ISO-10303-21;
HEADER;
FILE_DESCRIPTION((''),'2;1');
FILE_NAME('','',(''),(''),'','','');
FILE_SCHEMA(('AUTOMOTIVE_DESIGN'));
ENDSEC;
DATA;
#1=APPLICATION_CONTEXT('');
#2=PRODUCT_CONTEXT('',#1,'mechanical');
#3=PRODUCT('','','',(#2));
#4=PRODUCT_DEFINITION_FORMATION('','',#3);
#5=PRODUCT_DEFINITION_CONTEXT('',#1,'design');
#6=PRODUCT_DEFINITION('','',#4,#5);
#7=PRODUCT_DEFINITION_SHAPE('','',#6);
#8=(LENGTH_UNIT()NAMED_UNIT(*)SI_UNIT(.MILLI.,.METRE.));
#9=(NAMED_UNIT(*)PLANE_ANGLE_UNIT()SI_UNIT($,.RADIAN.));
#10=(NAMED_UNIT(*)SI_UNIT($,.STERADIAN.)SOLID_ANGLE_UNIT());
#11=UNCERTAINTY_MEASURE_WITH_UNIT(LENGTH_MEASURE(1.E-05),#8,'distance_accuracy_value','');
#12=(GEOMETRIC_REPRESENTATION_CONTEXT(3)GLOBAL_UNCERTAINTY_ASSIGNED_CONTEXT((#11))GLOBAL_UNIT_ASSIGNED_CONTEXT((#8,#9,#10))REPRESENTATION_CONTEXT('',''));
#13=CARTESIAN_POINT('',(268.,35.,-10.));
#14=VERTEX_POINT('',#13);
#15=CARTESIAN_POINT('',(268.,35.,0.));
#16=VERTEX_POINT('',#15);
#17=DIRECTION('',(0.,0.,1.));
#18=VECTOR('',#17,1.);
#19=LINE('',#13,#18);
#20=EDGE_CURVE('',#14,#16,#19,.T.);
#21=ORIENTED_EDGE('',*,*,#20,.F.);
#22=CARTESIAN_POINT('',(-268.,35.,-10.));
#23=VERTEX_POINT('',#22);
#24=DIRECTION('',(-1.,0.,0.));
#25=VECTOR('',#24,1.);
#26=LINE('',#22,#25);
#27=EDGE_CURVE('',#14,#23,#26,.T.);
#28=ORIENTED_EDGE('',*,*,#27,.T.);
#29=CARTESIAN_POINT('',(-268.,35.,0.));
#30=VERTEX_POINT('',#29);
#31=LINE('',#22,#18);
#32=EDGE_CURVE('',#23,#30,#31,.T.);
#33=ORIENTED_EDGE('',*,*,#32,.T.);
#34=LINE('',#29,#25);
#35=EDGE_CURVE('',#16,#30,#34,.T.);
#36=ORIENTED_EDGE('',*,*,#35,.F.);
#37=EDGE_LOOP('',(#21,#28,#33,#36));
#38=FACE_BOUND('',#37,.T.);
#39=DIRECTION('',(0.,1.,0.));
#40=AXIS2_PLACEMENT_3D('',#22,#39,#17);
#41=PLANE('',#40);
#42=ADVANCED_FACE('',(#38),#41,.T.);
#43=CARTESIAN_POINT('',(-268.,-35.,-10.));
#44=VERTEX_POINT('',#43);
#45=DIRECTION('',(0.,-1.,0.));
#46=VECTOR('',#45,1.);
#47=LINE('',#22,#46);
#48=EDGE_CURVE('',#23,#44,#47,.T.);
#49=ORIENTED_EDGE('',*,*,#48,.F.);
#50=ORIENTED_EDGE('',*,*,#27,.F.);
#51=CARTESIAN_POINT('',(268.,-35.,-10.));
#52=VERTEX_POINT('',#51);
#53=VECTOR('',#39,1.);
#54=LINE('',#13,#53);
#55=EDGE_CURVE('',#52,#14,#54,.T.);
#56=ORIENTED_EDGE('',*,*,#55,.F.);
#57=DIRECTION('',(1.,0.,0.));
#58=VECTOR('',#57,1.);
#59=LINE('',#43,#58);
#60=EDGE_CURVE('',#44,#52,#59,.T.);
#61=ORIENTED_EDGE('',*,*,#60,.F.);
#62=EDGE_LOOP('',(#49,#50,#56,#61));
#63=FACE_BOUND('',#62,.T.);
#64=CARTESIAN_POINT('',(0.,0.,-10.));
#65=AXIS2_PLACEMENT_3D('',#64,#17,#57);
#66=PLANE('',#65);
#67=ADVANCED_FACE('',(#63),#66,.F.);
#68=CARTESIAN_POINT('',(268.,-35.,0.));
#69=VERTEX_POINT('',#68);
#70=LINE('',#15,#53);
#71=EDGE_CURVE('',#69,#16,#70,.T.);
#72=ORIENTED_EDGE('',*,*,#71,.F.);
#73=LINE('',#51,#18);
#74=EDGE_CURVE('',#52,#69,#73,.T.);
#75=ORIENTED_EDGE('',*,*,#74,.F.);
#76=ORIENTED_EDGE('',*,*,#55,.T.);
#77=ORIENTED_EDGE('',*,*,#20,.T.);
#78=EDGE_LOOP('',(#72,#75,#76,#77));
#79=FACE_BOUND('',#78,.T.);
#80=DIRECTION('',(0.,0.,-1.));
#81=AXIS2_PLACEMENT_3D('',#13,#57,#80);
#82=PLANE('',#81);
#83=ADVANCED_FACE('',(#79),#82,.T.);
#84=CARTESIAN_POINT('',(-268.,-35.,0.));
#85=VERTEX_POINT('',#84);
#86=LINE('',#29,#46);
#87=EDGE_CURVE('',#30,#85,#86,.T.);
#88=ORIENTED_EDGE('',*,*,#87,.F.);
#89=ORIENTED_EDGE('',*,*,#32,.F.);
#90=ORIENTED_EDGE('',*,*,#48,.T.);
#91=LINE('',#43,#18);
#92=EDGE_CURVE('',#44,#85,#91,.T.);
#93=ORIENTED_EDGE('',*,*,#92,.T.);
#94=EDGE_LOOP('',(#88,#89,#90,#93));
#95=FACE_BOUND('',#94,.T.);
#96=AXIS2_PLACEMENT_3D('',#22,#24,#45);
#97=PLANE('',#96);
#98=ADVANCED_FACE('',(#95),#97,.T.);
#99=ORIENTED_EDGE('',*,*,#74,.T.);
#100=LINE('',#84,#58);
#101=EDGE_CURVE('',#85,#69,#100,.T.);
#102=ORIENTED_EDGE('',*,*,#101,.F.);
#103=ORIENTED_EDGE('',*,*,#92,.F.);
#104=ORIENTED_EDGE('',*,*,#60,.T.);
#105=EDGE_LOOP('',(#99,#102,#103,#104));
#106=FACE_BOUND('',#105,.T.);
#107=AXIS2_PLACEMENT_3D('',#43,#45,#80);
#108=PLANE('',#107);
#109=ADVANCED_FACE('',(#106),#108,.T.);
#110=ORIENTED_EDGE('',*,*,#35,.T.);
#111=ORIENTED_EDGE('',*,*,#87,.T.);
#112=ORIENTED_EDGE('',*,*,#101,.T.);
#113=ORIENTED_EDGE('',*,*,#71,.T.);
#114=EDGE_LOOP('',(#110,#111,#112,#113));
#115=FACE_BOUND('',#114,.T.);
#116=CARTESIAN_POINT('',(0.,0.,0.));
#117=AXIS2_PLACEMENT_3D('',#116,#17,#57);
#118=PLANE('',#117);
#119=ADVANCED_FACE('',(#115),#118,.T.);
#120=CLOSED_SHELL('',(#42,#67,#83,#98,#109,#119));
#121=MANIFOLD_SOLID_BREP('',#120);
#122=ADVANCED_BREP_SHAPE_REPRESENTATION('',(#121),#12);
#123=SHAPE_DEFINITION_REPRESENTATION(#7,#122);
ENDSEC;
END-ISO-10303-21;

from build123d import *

# Parameters (mm, degrees)
SKETCH_1_W             = 536
SKETCH_1_H             = 70
SM_BASE_FLANGE_1_DEPTH = 10


# Sheet-metal steps are written as plain solids
with BuildPart() as part:
    # Sketch 1 → 基体-法兰1 (new body)
    with BuildSketch(Plane.XY):
        Rectangle(SKETCH_1_W, SKETCH_1_H)
    extrude(amount=-SM_BASE_FLANGE_1_DEPTH)


solid = part.part
